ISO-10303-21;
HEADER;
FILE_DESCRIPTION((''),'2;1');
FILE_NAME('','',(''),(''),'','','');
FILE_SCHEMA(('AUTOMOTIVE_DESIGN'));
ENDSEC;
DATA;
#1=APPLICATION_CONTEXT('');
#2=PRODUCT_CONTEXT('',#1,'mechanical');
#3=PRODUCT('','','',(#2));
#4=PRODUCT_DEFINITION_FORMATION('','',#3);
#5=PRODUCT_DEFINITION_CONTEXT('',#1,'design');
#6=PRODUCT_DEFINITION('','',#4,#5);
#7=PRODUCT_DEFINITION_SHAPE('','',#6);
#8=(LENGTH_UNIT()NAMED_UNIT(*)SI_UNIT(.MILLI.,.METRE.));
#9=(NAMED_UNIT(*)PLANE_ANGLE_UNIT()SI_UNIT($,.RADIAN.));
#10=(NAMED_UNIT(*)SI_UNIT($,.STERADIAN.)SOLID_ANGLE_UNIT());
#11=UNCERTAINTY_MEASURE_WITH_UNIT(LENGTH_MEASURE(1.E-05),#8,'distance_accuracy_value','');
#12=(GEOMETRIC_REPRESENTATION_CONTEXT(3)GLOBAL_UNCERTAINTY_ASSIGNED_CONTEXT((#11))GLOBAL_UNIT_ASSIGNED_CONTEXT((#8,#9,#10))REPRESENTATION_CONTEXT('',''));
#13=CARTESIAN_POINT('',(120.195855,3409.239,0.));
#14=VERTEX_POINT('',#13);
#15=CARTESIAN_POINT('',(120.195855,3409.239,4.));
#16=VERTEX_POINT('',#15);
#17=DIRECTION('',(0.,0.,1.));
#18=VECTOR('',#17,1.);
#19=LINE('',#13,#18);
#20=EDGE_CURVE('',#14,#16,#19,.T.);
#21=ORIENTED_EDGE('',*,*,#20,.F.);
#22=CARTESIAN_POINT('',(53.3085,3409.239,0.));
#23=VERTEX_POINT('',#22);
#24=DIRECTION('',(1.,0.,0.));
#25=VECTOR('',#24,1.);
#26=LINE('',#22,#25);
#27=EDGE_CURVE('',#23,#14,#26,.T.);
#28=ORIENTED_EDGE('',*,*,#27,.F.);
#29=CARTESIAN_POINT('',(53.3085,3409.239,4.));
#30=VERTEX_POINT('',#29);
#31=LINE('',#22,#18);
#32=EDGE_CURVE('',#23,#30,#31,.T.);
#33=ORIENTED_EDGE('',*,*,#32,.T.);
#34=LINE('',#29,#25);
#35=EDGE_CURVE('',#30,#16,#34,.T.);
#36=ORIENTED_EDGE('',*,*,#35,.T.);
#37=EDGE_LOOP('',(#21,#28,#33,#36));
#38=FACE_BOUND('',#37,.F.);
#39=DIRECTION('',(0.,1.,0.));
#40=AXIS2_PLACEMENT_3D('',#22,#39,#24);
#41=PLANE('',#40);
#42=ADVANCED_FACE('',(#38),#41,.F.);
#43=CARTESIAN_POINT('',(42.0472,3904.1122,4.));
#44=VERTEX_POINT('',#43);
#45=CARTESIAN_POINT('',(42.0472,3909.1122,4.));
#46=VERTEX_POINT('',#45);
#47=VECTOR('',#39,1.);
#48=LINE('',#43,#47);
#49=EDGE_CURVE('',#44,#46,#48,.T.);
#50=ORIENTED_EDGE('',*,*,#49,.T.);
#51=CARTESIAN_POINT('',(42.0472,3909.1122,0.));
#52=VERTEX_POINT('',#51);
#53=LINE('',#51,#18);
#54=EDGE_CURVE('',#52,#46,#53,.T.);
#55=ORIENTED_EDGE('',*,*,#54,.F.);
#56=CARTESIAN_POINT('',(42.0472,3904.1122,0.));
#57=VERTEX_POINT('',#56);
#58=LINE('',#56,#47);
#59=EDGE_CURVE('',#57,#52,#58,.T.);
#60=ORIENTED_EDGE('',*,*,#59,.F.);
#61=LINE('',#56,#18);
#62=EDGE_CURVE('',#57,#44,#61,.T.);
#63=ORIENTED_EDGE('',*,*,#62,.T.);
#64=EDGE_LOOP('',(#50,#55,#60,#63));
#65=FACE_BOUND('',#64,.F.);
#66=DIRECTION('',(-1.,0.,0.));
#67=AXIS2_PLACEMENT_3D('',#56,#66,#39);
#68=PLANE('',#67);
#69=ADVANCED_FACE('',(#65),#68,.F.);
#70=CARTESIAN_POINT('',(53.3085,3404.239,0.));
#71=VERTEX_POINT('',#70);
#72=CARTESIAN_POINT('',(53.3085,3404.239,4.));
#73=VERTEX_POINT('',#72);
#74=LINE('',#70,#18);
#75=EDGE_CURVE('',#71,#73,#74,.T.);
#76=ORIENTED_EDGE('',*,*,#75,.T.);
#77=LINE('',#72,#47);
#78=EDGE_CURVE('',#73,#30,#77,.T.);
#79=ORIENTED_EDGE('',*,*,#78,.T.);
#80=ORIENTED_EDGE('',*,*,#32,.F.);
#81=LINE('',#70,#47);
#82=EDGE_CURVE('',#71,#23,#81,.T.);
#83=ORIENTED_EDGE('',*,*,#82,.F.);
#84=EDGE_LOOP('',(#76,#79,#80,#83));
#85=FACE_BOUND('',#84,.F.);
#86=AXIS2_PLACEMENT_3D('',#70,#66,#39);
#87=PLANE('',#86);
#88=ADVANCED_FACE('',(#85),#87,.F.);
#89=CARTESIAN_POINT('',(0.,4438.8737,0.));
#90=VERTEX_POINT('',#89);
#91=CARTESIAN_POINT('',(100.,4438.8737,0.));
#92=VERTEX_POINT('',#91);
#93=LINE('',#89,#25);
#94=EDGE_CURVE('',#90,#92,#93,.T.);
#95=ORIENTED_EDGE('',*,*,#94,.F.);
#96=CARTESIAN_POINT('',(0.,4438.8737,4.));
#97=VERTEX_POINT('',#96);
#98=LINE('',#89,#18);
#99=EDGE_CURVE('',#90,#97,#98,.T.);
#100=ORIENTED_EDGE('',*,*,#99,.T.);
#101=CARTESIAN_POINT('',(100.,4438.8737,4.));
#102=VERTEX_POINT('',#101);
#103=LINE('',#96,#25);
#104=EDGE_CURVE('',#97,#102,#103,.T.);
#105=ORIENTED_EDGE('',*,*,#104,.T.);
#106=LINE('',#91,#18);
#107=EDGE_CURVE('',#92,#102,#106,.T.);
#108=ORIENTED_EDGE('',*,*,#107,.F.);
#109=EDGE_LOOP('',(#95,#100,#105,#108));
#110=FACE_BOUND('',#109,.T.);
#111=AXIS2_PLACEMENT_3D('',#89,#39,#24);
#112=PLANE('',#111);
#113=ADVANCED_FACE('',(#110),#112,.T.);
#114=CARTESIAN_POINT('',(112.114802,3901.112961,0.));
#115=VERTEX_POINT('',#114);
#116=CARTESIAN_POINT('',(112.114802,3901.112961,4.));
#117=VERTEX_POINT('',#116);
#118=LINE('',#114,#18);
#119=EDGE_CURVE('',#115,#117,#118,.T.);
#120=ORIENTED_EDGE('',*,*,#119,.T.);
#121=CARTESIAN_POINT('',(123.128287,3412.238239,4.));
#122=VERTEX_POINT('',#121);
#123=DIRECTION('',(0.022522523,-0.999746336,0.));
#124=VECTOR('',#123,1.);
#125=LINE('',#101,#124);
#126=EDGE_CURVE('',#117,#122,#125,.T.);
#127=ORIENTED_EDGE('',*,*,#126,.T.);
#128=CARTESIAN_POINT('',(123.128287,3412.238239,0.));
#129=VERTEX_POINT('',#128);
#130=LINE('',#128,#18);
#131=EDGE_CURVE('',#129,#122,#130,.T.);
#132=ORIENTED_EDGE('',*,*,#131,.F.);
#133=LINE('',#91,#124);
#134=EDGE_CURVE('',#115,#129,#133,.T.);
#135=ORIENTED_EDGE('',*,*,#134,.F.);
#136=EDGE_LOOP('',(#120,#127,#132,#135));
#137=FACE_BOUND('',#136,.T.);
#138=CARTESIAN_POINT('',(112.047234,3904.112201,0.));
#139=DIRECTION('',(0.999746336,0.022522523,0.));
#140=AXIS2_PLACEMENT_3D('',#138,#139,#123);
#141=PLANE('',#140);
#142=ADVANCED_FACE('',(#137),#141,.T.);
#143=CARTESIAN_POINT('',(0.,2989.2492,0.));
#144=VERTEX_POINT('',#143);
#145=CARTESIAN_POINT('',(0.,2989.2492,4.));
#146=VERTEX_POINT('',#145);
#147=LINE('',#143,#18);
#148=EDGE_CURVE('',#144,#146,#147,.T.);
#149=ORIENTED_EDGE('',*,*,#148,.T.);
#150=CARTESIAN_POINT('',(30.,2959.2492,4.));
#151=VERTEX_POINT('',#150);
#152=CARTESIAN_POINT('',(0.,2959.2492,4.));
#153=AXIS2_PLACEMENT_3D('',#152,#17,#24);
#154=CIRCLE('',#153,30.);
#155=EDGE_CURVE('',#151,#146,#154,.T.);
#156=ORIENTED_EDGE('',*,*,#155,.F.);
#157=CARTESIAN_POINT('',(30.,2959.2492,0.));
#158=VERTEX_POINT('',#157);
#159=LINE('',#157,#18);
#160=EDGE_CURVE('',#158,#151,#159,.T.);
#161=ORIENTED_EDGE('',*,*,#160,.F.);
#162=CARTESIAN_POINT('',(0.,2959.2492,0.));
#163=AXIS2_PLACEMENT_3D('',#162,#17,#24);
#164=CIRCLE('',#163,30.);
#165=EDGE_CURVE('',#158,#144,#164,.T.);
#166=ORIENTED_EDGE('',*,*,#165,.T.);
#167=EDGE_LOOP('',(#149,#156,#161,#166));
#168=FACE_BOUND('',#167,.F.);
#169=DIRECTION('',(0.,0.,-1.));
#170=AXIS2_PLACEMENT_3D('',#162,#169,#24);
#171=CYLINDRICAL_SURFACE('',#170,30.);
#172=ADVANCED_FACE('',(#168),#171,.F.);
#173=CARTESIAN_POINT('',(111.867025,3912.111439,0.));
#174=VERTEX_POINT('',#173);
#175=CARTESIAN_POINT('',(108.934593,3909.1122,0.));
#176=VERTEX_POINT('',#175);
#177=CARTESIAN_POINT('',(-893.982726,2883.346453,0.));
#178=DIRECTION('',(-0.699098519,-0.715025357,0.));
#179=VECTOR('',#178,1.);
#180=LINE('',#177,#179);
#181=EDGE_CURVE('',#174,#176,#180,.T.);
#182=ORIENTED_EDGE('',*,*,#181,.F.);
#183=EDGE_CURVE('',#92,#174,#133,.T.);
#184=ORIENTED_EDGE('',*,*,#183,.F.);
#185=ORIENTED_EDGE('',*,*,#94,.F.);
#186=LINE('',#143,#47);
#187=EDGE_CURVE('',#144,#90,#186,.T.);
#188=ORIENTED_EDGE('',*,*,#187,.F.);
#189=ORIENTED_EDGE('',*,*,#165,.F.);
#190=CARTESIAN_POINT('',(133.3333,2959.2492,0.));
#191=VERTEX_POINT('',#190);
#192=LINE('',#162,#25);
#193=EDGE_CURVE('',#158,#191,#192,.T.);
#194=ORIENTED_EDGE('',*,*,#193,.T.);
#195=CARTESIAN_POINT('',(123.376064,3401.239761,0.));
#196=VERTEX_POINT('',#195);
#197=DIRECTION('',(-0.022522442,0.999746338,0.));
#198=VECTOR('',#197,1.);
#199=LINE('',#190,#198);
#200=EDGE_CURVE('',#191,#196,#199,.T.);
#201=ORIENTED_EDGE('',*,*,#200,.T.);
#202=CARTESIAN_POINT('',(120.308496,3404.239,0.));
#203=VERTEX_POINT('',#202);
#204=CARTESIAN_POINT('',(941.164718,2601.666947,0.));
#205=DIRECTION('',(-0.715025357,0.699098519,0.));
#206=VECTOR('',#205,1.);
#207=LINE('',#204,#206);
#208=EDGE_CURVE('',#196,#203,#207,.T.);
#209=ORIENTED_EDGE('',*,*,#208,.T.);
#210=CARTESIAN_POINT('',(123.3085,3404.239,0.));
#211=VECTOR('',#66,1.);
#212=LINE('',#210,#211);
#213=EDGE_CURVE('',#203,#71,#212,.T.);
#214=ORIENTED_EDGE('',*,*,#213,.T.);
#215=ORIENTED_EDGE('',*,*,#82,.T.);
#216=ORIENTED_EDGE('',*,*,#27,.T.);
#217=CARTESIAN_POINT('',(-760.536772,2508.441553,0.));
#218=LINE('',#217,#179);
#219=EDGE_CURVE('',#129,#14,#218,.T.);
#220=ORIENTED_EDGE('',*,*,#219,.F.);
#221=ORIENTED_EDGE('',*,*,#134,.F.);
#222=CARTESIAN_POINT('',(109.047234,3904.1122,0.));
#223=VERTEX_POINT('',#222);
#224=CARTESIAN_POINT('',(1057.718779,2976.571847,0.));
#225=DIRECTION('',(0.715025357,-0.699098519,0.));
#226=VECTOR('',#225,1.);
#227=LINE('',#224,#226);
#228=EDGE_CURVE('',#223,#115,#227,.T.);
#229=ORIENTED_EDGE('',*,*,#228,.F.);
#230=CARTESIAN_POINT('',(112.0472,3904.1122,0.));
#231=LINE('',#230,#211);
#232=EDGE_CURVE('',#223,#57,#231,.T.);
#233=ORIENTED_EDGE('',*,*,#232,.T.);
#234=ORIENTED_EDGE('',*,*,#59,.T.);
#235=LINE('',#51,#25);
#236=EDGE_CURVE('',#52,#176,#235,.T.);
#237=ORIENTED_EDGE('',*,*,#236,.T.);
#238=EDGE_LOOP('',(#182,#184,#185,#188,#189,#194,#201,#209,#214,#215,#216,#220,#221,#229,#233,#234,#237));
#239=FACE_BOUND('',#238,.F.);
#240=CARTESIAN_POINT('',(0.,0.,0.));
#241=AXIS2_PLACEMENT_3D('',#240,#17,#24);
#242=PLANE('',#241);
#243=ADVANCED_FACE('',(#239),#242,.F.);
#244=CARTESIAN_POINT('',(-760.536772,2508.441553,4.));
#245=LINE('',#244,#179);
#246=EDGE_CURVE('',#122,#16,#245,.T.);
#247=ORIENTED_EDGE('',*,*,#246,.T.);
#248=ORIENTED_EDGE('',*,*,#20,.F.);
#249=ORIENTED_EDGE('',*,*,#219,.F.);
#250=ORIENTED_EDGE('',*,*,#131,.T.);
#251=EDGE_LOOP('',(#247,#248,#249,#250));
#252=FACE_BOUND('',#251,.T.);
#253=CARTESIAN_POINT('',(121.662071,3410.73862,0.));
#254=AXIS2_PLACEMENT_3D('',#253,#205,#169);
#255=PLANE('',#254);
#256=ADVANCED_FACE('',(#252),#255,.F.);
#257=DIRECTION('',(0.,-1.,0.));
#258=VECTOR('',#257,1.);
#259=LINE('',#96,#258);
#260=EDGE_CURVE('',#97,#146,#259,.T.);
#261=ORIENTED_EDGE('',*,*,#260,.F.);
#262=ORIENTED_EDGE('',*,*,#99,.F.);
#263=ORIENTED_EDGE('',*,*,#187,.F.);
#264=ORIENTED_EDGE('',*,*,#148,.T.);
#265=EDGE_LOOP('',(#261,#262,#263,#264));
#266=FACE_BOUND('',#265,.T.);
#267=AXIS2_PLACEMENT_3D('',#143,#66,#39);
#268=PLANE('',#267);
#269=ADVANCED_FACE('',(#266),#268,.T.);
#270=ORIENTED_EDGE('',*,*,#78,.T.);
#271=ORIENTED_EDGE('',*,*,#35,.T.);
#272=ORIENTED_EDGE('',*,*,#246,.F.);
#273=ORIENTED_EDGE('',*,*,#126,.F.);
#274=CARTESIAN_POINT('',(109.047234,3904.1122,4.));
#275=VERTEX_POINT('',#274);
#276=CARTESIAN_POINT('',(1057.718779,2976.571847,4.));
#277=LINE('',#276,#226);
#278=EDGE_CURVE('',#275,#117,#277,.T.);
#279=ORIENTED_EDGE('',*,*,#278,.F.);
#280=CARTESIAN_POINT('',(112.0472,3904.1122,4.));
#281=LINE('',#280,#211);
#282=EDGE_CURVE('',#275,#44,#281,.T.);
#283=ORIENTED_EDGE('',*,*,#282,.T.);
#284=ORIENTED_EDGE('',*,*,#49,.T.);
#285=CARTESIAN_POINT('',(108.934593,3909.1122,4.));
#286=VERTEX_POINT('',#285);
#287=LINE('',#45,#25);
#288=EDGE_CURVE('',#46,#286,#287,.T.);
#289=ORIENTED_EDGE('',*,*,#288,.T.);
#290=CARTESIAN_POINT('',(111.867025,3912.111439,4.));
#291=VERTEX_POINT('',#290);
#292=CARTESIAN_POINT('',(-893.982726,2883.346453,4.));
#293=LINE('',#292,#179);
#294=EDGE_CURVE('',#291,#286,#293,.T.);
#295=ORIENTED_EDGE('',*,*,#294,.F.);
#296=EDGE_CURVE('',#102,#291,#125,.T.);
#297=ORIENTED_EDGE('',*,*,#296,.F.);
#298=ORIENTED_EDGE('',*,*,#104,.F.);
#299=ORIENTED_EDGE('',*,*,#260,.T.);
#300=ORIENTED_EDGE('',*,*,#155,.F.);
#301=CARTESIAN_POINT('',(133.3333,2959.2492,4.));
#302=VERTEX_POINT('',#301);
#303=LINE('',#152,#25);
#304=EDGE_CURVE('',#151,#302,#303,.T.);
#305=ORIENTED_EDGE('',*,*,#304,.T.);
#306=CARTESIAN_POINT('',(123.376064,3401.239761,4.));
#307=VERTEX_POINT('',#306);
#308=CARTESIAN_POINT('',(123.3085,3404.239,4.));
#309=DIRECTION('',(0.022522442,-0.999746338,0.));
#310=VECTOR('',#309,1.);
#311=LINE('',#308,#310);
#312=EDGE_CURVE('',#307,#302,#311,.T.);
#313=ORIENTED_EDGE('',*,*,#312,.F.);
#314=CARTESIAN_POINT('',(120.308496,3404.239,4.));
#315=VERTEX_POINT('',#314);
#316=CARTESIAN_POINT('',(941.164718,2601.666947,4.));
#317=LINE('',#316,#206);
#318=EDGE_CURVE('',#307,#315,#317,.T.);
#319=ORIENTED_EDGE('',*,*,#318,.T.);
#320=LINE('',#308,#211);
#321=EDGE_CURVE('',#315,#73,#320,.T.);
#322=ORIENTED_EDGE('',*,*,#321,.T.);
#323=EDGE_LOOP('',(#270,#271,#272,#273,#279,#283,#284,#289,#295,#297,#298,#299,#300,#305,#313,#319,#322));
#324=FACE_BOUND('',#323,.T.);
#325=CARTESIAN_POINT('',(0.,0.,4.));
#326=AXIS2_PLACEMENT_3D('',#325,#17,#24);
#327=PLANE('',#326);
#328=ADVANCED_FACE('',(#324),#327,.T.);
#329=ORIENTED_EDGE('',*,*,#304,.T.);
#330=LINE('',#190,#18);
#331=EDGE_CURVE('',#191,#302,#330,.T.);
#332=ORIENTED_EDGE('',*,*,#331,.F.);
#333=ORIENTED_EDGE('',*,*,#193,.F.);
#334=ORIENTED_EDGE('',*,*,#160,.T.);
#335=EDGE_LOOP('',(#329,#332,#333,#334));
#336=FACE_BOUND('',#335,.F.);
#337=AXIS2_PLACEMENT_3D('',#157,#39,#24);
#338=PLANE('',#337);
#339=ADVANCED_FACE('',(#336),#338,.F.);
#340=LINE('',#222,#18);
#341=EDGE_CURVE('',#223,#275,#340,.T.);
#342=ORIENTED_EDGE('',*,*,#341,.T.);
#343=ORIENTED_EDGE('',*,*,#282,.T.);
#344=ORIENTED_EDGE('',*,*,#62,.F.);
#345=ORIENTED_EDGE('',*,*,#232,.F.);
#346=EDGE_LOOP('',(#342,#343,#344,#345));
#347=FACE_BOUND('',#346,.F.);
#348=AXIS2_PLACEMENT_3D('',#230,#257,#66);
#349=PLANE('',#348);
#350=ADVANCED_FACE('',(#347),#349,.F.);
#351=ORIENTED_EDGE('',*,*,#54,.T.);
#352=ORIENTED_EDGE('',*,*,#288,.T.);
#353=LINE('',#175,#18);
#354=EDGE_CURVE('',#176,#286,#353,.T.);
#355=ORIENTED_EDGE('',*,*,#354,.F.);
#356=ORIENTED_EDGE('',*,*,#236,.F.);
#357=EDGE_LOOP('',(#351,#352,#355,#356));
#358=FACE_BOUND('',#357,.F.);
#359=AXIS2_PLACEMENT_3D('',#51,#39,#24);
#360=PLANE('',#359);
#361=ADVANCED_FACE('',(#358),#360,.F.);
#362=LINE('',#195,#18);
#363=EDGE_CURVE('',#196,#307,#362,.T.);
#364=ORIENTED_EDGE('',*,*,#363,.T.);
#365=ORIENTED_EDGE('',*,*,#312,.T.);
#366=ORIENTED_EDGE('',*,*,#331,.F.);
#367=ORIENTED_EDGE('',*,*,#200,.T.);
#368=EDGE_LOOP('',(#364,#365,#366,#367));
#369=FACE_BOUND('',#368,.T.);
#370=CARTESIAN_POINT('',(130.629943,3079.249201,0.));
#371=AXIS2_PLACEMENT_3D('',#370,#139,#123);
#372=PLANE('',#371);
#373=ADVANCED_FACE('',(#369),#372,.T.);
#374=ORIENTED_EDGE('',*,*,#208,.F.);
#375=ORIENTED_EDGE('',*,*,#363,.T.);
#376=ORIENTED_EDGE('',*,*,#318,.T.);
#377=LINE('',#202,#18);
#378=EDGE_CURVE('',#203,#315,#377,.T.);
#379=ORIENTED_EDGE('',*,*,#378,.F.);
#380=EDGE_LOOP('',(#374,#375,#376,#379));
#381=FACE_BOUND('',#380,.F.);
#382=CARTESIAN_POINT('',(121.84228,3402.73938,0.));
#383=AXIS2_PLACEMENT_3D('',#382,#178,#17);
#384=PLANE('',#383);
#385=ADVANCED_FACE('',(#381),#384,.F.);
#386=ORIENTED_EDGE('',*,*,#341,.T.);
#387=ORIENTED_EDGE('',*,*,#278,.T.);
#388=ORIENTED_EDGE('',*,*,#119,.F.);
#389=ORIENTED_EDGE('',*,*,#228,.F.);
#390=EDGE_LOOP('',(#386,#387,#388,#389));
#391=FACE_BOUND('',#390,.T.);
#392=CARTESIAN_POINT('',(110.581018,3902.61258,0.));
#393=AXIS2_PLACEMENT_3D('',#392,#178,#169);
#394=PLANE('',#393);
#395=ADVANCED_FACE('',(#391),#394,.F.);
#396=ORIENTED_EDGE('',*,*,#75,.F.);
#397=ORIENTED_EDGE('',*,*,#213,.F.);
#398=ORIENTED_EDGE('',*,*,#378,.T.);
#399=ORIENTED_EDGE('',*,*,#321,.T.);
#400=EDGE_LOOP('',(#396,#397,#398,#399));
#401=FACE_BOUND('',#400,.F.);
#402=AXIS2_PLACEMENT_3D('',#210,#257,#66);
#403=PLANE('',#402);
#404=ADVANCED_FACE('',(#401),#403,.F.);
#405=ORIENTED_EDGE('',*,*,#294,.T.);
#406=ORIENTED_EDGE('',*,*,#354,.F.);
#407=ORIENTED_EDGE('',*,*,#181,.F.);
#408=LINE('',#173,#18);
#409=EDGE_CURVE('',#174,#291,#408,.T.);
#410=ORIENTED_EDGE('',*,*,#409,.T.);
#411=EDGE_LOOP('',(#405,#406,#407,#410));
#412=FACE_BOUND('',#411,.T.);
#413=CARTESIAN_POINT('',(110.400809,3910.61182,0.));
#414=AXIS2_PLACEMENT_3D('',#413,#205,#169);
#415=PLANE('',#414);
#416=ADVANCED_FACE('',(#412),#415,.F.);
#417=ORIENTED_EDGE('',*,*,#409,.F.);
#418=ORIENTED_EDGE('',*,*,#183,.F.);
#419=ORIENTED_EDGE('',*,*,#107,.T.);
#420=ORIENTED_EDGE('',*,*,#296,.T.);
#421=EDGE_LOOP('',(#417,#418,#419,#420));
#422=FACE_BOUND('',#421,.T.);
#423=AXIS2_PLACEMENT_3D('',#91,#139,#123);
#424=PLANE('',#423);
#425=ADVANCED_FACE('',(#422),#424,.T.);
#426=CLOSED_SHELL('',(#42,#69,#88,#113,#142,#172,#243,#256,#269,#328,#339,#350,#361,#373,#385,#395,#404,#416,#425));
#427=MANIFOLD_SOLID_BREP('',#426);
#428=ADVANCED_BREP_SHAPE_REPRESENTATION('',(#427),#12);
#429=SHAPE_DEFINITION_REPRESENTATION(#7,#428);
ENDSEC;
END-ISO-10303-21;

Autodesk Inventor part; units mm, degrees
ref_plane "YZ Plane" through (0, 0, 0) normal (1, 0, 0) x (0, 1, 0)
ref_plane "XZ Plane" through (0, 0, 0) normal (0, 1, 0) x (-1, 0, 0)
ref_plane "XY Plane" through (0, 0, 0) normal (0, 0, 1) x (1, 0, 0)
sketch "Sketch1" plane through (0, 0, 0) normal (0, 0, 1) x (1, 0, 0)
  line L0 (0, 0) -> (0, 4438.8737)
  line L1 (0, 4438.8737) -> (100, 4438.8737)
  line L2 (100, 4438.8737) -> (200, 0)
  line L3 (200, 0) -> (0, 0)
  circle A0 centre (0, 0) radius 30
  line L4 (0, 1479.6246) -> (166.6667, 1479.6246)
  line L5 (0, 2959.2492) -> (133.3333, 2959.2492)
  circle A1 centre (0, 1479.6246) radius 30
  circle A2 centre (0, 2959.2492) radius 30
  line L6 (190.8761, 405) -> (120.8761, 405)
  line L7 (120.8761, 405) -> (120.8761, 410)
  line L8 (120.8761, 410) -> (190.8761, 410)
  line L9 (190.8761, 410) -> (190.8761, 405)
  line L10 (109.6148, 909.8732) -> (179.6148, 909.8732)
  line L11 (179.6148, 904.8732) -> (109.6148, 904.8732)
  line L12 (109.6148, 904.8732) -> (109.6148, 909.8732)
  line L13 (179.6148, 909.8732) -> (179.6148, 904.8732)
  line L14 (98.3535, 1409.7463) -> (168.3535, 1409.7463)
  line L15 (168.3535, 1404.7463) -> (98.3535, 1404.7463)
  line L16 (98.3535, 1404.7463) -> (98.3535, 1409.7463)
  line L17 (168.3535, 1409.7463) -> (168.3535, 1404.7463)
  line L18 (87.0923, 1909.6195) -> (157.0923, 1909.6195)
  line L19 (157.0923, 1904.6195) -> (87.0923, 1904.6195)
  line L20 (87.0923, 1904.6195) -> (87.0923, 1909.6195)
  line L21 (157.0923, 1909.6195) -> (157.0923, 1904.6195)
  line L22 (75.831, 2409.4927) -> (145.831, 2409.4927)
  line L23 (145.831, 2404.4927) -> (75.831, 2404.4927)
  line L24 (75.831, 2404.4927) -> (75.831, 2409.4927)
  line L25 (145.831, 2409.4927) -> (145.831, 2404.4927)
  line L26 (64.5698, 2909.3658) -> (134.5698, 2909.3658)
  line L27 (134.5698, 2904.3658) -> (64.5698, 2904.3658)
  line L28 (64.5698, 2904.3658) -> (64.5698, 2909.3658)
  line L29 (134.5698, 2909.3658) -> (134.5698, 2904.3658)
  line L30 (53.3085, 3409.239) -> (123.3085, 3409.239)
  line L31 (123.3085, 3404.239) -> (53.3085, 3404.239)
  line L32 (53.3085, 3404.239) -> (53.3085, 3409.239)
  line L33 (123.3085, 3409.239) -> (123.3085, 3404.239)
  line L34 (42.0472, 3909.1122) -> (112.0472, 3909.1122)
  line L35 (112.0472, 3904.1122) -> (42.0472, 3904.1122)
  line L36 (42.0472, 3904.1122) -> (42.0472, 3909.1122)
  line L37 (112.0472, 3909.1122) -> (112.0472, 3904.1122)
  line L38 (0, 1629.6246) -> (163.2874, 1629.6246)
  line L39 (0, 3079.2492) -> (130.6299, 3079.2492)
  point P0 (30, 2959.2492)
  point P1 (0, 2929.2492)
  point P2 (0, 1509.6246)
  point P3 (0, 1449.6246)
  point P4 (0, 30)
  point P5 (30, 0)
  point P6 (190.7634, 410)
  point P7 (179.5022, 909.8732)
  point P8 (168.3535, 1404.7463)
  point P9 (168.2409, 1409.7463)
  point P10 (30, 1479.6246)
  point P11 (157.0923, 1904.6195)
  point P12 (156.9796, 1909.6195)
  point P13 (145.831, 2404.4927)
  point P14 (145.7184, 2409.4927)
  point P15 (134.5698, 2904.3658)
  point P16 (134.4571, 2909.3658)
  point P17 (0, 2989.2492)
  point P18 (123.3085, 3404.239)
  point P19 (123.1959, 3409.239)
  point P20 (112.0472, 3904.1122)
  point P21 (111.9346, 3909.1122)
  dimension "d65" = 100
  dimension "d67" = 200
  dimension "d68" = 60
  dimension "d69" = 1480
  dimension "d70" = 1480
  dimension "d71" = 1480
  dimension "d72" = 5
  dimension "d73" = 70
  dimension "d74" = 410
  dimension "d77" = 500
  dimension "d82" = 120
  dimension "d83" = 150
extrude "Plate3" add sketch "Sketch1" along normal blind 4 contours L39 L2 L5 A2 L0 | L0 L1 L2 L34 L36 L35 L30 L32 L31 L39
chamfer "Corner Chamfer2" distance 3 angle 45 4 edges at (123.3085, 3404.239, 2) (123.1959, 3409.239, 2) (112.0472, 3904.1122, 2) (111.9346, 3909.1122, 2)
equation "\"BendRadius\" = Thickness"
equation "\"BendReliefWidth\" = Thickness"
equation "\"BendReliefDepth\" = 0.5 * Thickness"
equation "\"CornerReliefSize\" = 4 * Thickness"
equation "\"MinimumRemnant\" = 2 * Thickness"
equation "\"TransitionRadius\" = BendRadius"
equation "\"JacobiRadiusSize\" = BendRadius"
equation "\"GapSize\" = Thickness"
equation "\"Thickness\" = 4"
properties part number "GBK 3311 central third rib_CPY" material "Steel"
